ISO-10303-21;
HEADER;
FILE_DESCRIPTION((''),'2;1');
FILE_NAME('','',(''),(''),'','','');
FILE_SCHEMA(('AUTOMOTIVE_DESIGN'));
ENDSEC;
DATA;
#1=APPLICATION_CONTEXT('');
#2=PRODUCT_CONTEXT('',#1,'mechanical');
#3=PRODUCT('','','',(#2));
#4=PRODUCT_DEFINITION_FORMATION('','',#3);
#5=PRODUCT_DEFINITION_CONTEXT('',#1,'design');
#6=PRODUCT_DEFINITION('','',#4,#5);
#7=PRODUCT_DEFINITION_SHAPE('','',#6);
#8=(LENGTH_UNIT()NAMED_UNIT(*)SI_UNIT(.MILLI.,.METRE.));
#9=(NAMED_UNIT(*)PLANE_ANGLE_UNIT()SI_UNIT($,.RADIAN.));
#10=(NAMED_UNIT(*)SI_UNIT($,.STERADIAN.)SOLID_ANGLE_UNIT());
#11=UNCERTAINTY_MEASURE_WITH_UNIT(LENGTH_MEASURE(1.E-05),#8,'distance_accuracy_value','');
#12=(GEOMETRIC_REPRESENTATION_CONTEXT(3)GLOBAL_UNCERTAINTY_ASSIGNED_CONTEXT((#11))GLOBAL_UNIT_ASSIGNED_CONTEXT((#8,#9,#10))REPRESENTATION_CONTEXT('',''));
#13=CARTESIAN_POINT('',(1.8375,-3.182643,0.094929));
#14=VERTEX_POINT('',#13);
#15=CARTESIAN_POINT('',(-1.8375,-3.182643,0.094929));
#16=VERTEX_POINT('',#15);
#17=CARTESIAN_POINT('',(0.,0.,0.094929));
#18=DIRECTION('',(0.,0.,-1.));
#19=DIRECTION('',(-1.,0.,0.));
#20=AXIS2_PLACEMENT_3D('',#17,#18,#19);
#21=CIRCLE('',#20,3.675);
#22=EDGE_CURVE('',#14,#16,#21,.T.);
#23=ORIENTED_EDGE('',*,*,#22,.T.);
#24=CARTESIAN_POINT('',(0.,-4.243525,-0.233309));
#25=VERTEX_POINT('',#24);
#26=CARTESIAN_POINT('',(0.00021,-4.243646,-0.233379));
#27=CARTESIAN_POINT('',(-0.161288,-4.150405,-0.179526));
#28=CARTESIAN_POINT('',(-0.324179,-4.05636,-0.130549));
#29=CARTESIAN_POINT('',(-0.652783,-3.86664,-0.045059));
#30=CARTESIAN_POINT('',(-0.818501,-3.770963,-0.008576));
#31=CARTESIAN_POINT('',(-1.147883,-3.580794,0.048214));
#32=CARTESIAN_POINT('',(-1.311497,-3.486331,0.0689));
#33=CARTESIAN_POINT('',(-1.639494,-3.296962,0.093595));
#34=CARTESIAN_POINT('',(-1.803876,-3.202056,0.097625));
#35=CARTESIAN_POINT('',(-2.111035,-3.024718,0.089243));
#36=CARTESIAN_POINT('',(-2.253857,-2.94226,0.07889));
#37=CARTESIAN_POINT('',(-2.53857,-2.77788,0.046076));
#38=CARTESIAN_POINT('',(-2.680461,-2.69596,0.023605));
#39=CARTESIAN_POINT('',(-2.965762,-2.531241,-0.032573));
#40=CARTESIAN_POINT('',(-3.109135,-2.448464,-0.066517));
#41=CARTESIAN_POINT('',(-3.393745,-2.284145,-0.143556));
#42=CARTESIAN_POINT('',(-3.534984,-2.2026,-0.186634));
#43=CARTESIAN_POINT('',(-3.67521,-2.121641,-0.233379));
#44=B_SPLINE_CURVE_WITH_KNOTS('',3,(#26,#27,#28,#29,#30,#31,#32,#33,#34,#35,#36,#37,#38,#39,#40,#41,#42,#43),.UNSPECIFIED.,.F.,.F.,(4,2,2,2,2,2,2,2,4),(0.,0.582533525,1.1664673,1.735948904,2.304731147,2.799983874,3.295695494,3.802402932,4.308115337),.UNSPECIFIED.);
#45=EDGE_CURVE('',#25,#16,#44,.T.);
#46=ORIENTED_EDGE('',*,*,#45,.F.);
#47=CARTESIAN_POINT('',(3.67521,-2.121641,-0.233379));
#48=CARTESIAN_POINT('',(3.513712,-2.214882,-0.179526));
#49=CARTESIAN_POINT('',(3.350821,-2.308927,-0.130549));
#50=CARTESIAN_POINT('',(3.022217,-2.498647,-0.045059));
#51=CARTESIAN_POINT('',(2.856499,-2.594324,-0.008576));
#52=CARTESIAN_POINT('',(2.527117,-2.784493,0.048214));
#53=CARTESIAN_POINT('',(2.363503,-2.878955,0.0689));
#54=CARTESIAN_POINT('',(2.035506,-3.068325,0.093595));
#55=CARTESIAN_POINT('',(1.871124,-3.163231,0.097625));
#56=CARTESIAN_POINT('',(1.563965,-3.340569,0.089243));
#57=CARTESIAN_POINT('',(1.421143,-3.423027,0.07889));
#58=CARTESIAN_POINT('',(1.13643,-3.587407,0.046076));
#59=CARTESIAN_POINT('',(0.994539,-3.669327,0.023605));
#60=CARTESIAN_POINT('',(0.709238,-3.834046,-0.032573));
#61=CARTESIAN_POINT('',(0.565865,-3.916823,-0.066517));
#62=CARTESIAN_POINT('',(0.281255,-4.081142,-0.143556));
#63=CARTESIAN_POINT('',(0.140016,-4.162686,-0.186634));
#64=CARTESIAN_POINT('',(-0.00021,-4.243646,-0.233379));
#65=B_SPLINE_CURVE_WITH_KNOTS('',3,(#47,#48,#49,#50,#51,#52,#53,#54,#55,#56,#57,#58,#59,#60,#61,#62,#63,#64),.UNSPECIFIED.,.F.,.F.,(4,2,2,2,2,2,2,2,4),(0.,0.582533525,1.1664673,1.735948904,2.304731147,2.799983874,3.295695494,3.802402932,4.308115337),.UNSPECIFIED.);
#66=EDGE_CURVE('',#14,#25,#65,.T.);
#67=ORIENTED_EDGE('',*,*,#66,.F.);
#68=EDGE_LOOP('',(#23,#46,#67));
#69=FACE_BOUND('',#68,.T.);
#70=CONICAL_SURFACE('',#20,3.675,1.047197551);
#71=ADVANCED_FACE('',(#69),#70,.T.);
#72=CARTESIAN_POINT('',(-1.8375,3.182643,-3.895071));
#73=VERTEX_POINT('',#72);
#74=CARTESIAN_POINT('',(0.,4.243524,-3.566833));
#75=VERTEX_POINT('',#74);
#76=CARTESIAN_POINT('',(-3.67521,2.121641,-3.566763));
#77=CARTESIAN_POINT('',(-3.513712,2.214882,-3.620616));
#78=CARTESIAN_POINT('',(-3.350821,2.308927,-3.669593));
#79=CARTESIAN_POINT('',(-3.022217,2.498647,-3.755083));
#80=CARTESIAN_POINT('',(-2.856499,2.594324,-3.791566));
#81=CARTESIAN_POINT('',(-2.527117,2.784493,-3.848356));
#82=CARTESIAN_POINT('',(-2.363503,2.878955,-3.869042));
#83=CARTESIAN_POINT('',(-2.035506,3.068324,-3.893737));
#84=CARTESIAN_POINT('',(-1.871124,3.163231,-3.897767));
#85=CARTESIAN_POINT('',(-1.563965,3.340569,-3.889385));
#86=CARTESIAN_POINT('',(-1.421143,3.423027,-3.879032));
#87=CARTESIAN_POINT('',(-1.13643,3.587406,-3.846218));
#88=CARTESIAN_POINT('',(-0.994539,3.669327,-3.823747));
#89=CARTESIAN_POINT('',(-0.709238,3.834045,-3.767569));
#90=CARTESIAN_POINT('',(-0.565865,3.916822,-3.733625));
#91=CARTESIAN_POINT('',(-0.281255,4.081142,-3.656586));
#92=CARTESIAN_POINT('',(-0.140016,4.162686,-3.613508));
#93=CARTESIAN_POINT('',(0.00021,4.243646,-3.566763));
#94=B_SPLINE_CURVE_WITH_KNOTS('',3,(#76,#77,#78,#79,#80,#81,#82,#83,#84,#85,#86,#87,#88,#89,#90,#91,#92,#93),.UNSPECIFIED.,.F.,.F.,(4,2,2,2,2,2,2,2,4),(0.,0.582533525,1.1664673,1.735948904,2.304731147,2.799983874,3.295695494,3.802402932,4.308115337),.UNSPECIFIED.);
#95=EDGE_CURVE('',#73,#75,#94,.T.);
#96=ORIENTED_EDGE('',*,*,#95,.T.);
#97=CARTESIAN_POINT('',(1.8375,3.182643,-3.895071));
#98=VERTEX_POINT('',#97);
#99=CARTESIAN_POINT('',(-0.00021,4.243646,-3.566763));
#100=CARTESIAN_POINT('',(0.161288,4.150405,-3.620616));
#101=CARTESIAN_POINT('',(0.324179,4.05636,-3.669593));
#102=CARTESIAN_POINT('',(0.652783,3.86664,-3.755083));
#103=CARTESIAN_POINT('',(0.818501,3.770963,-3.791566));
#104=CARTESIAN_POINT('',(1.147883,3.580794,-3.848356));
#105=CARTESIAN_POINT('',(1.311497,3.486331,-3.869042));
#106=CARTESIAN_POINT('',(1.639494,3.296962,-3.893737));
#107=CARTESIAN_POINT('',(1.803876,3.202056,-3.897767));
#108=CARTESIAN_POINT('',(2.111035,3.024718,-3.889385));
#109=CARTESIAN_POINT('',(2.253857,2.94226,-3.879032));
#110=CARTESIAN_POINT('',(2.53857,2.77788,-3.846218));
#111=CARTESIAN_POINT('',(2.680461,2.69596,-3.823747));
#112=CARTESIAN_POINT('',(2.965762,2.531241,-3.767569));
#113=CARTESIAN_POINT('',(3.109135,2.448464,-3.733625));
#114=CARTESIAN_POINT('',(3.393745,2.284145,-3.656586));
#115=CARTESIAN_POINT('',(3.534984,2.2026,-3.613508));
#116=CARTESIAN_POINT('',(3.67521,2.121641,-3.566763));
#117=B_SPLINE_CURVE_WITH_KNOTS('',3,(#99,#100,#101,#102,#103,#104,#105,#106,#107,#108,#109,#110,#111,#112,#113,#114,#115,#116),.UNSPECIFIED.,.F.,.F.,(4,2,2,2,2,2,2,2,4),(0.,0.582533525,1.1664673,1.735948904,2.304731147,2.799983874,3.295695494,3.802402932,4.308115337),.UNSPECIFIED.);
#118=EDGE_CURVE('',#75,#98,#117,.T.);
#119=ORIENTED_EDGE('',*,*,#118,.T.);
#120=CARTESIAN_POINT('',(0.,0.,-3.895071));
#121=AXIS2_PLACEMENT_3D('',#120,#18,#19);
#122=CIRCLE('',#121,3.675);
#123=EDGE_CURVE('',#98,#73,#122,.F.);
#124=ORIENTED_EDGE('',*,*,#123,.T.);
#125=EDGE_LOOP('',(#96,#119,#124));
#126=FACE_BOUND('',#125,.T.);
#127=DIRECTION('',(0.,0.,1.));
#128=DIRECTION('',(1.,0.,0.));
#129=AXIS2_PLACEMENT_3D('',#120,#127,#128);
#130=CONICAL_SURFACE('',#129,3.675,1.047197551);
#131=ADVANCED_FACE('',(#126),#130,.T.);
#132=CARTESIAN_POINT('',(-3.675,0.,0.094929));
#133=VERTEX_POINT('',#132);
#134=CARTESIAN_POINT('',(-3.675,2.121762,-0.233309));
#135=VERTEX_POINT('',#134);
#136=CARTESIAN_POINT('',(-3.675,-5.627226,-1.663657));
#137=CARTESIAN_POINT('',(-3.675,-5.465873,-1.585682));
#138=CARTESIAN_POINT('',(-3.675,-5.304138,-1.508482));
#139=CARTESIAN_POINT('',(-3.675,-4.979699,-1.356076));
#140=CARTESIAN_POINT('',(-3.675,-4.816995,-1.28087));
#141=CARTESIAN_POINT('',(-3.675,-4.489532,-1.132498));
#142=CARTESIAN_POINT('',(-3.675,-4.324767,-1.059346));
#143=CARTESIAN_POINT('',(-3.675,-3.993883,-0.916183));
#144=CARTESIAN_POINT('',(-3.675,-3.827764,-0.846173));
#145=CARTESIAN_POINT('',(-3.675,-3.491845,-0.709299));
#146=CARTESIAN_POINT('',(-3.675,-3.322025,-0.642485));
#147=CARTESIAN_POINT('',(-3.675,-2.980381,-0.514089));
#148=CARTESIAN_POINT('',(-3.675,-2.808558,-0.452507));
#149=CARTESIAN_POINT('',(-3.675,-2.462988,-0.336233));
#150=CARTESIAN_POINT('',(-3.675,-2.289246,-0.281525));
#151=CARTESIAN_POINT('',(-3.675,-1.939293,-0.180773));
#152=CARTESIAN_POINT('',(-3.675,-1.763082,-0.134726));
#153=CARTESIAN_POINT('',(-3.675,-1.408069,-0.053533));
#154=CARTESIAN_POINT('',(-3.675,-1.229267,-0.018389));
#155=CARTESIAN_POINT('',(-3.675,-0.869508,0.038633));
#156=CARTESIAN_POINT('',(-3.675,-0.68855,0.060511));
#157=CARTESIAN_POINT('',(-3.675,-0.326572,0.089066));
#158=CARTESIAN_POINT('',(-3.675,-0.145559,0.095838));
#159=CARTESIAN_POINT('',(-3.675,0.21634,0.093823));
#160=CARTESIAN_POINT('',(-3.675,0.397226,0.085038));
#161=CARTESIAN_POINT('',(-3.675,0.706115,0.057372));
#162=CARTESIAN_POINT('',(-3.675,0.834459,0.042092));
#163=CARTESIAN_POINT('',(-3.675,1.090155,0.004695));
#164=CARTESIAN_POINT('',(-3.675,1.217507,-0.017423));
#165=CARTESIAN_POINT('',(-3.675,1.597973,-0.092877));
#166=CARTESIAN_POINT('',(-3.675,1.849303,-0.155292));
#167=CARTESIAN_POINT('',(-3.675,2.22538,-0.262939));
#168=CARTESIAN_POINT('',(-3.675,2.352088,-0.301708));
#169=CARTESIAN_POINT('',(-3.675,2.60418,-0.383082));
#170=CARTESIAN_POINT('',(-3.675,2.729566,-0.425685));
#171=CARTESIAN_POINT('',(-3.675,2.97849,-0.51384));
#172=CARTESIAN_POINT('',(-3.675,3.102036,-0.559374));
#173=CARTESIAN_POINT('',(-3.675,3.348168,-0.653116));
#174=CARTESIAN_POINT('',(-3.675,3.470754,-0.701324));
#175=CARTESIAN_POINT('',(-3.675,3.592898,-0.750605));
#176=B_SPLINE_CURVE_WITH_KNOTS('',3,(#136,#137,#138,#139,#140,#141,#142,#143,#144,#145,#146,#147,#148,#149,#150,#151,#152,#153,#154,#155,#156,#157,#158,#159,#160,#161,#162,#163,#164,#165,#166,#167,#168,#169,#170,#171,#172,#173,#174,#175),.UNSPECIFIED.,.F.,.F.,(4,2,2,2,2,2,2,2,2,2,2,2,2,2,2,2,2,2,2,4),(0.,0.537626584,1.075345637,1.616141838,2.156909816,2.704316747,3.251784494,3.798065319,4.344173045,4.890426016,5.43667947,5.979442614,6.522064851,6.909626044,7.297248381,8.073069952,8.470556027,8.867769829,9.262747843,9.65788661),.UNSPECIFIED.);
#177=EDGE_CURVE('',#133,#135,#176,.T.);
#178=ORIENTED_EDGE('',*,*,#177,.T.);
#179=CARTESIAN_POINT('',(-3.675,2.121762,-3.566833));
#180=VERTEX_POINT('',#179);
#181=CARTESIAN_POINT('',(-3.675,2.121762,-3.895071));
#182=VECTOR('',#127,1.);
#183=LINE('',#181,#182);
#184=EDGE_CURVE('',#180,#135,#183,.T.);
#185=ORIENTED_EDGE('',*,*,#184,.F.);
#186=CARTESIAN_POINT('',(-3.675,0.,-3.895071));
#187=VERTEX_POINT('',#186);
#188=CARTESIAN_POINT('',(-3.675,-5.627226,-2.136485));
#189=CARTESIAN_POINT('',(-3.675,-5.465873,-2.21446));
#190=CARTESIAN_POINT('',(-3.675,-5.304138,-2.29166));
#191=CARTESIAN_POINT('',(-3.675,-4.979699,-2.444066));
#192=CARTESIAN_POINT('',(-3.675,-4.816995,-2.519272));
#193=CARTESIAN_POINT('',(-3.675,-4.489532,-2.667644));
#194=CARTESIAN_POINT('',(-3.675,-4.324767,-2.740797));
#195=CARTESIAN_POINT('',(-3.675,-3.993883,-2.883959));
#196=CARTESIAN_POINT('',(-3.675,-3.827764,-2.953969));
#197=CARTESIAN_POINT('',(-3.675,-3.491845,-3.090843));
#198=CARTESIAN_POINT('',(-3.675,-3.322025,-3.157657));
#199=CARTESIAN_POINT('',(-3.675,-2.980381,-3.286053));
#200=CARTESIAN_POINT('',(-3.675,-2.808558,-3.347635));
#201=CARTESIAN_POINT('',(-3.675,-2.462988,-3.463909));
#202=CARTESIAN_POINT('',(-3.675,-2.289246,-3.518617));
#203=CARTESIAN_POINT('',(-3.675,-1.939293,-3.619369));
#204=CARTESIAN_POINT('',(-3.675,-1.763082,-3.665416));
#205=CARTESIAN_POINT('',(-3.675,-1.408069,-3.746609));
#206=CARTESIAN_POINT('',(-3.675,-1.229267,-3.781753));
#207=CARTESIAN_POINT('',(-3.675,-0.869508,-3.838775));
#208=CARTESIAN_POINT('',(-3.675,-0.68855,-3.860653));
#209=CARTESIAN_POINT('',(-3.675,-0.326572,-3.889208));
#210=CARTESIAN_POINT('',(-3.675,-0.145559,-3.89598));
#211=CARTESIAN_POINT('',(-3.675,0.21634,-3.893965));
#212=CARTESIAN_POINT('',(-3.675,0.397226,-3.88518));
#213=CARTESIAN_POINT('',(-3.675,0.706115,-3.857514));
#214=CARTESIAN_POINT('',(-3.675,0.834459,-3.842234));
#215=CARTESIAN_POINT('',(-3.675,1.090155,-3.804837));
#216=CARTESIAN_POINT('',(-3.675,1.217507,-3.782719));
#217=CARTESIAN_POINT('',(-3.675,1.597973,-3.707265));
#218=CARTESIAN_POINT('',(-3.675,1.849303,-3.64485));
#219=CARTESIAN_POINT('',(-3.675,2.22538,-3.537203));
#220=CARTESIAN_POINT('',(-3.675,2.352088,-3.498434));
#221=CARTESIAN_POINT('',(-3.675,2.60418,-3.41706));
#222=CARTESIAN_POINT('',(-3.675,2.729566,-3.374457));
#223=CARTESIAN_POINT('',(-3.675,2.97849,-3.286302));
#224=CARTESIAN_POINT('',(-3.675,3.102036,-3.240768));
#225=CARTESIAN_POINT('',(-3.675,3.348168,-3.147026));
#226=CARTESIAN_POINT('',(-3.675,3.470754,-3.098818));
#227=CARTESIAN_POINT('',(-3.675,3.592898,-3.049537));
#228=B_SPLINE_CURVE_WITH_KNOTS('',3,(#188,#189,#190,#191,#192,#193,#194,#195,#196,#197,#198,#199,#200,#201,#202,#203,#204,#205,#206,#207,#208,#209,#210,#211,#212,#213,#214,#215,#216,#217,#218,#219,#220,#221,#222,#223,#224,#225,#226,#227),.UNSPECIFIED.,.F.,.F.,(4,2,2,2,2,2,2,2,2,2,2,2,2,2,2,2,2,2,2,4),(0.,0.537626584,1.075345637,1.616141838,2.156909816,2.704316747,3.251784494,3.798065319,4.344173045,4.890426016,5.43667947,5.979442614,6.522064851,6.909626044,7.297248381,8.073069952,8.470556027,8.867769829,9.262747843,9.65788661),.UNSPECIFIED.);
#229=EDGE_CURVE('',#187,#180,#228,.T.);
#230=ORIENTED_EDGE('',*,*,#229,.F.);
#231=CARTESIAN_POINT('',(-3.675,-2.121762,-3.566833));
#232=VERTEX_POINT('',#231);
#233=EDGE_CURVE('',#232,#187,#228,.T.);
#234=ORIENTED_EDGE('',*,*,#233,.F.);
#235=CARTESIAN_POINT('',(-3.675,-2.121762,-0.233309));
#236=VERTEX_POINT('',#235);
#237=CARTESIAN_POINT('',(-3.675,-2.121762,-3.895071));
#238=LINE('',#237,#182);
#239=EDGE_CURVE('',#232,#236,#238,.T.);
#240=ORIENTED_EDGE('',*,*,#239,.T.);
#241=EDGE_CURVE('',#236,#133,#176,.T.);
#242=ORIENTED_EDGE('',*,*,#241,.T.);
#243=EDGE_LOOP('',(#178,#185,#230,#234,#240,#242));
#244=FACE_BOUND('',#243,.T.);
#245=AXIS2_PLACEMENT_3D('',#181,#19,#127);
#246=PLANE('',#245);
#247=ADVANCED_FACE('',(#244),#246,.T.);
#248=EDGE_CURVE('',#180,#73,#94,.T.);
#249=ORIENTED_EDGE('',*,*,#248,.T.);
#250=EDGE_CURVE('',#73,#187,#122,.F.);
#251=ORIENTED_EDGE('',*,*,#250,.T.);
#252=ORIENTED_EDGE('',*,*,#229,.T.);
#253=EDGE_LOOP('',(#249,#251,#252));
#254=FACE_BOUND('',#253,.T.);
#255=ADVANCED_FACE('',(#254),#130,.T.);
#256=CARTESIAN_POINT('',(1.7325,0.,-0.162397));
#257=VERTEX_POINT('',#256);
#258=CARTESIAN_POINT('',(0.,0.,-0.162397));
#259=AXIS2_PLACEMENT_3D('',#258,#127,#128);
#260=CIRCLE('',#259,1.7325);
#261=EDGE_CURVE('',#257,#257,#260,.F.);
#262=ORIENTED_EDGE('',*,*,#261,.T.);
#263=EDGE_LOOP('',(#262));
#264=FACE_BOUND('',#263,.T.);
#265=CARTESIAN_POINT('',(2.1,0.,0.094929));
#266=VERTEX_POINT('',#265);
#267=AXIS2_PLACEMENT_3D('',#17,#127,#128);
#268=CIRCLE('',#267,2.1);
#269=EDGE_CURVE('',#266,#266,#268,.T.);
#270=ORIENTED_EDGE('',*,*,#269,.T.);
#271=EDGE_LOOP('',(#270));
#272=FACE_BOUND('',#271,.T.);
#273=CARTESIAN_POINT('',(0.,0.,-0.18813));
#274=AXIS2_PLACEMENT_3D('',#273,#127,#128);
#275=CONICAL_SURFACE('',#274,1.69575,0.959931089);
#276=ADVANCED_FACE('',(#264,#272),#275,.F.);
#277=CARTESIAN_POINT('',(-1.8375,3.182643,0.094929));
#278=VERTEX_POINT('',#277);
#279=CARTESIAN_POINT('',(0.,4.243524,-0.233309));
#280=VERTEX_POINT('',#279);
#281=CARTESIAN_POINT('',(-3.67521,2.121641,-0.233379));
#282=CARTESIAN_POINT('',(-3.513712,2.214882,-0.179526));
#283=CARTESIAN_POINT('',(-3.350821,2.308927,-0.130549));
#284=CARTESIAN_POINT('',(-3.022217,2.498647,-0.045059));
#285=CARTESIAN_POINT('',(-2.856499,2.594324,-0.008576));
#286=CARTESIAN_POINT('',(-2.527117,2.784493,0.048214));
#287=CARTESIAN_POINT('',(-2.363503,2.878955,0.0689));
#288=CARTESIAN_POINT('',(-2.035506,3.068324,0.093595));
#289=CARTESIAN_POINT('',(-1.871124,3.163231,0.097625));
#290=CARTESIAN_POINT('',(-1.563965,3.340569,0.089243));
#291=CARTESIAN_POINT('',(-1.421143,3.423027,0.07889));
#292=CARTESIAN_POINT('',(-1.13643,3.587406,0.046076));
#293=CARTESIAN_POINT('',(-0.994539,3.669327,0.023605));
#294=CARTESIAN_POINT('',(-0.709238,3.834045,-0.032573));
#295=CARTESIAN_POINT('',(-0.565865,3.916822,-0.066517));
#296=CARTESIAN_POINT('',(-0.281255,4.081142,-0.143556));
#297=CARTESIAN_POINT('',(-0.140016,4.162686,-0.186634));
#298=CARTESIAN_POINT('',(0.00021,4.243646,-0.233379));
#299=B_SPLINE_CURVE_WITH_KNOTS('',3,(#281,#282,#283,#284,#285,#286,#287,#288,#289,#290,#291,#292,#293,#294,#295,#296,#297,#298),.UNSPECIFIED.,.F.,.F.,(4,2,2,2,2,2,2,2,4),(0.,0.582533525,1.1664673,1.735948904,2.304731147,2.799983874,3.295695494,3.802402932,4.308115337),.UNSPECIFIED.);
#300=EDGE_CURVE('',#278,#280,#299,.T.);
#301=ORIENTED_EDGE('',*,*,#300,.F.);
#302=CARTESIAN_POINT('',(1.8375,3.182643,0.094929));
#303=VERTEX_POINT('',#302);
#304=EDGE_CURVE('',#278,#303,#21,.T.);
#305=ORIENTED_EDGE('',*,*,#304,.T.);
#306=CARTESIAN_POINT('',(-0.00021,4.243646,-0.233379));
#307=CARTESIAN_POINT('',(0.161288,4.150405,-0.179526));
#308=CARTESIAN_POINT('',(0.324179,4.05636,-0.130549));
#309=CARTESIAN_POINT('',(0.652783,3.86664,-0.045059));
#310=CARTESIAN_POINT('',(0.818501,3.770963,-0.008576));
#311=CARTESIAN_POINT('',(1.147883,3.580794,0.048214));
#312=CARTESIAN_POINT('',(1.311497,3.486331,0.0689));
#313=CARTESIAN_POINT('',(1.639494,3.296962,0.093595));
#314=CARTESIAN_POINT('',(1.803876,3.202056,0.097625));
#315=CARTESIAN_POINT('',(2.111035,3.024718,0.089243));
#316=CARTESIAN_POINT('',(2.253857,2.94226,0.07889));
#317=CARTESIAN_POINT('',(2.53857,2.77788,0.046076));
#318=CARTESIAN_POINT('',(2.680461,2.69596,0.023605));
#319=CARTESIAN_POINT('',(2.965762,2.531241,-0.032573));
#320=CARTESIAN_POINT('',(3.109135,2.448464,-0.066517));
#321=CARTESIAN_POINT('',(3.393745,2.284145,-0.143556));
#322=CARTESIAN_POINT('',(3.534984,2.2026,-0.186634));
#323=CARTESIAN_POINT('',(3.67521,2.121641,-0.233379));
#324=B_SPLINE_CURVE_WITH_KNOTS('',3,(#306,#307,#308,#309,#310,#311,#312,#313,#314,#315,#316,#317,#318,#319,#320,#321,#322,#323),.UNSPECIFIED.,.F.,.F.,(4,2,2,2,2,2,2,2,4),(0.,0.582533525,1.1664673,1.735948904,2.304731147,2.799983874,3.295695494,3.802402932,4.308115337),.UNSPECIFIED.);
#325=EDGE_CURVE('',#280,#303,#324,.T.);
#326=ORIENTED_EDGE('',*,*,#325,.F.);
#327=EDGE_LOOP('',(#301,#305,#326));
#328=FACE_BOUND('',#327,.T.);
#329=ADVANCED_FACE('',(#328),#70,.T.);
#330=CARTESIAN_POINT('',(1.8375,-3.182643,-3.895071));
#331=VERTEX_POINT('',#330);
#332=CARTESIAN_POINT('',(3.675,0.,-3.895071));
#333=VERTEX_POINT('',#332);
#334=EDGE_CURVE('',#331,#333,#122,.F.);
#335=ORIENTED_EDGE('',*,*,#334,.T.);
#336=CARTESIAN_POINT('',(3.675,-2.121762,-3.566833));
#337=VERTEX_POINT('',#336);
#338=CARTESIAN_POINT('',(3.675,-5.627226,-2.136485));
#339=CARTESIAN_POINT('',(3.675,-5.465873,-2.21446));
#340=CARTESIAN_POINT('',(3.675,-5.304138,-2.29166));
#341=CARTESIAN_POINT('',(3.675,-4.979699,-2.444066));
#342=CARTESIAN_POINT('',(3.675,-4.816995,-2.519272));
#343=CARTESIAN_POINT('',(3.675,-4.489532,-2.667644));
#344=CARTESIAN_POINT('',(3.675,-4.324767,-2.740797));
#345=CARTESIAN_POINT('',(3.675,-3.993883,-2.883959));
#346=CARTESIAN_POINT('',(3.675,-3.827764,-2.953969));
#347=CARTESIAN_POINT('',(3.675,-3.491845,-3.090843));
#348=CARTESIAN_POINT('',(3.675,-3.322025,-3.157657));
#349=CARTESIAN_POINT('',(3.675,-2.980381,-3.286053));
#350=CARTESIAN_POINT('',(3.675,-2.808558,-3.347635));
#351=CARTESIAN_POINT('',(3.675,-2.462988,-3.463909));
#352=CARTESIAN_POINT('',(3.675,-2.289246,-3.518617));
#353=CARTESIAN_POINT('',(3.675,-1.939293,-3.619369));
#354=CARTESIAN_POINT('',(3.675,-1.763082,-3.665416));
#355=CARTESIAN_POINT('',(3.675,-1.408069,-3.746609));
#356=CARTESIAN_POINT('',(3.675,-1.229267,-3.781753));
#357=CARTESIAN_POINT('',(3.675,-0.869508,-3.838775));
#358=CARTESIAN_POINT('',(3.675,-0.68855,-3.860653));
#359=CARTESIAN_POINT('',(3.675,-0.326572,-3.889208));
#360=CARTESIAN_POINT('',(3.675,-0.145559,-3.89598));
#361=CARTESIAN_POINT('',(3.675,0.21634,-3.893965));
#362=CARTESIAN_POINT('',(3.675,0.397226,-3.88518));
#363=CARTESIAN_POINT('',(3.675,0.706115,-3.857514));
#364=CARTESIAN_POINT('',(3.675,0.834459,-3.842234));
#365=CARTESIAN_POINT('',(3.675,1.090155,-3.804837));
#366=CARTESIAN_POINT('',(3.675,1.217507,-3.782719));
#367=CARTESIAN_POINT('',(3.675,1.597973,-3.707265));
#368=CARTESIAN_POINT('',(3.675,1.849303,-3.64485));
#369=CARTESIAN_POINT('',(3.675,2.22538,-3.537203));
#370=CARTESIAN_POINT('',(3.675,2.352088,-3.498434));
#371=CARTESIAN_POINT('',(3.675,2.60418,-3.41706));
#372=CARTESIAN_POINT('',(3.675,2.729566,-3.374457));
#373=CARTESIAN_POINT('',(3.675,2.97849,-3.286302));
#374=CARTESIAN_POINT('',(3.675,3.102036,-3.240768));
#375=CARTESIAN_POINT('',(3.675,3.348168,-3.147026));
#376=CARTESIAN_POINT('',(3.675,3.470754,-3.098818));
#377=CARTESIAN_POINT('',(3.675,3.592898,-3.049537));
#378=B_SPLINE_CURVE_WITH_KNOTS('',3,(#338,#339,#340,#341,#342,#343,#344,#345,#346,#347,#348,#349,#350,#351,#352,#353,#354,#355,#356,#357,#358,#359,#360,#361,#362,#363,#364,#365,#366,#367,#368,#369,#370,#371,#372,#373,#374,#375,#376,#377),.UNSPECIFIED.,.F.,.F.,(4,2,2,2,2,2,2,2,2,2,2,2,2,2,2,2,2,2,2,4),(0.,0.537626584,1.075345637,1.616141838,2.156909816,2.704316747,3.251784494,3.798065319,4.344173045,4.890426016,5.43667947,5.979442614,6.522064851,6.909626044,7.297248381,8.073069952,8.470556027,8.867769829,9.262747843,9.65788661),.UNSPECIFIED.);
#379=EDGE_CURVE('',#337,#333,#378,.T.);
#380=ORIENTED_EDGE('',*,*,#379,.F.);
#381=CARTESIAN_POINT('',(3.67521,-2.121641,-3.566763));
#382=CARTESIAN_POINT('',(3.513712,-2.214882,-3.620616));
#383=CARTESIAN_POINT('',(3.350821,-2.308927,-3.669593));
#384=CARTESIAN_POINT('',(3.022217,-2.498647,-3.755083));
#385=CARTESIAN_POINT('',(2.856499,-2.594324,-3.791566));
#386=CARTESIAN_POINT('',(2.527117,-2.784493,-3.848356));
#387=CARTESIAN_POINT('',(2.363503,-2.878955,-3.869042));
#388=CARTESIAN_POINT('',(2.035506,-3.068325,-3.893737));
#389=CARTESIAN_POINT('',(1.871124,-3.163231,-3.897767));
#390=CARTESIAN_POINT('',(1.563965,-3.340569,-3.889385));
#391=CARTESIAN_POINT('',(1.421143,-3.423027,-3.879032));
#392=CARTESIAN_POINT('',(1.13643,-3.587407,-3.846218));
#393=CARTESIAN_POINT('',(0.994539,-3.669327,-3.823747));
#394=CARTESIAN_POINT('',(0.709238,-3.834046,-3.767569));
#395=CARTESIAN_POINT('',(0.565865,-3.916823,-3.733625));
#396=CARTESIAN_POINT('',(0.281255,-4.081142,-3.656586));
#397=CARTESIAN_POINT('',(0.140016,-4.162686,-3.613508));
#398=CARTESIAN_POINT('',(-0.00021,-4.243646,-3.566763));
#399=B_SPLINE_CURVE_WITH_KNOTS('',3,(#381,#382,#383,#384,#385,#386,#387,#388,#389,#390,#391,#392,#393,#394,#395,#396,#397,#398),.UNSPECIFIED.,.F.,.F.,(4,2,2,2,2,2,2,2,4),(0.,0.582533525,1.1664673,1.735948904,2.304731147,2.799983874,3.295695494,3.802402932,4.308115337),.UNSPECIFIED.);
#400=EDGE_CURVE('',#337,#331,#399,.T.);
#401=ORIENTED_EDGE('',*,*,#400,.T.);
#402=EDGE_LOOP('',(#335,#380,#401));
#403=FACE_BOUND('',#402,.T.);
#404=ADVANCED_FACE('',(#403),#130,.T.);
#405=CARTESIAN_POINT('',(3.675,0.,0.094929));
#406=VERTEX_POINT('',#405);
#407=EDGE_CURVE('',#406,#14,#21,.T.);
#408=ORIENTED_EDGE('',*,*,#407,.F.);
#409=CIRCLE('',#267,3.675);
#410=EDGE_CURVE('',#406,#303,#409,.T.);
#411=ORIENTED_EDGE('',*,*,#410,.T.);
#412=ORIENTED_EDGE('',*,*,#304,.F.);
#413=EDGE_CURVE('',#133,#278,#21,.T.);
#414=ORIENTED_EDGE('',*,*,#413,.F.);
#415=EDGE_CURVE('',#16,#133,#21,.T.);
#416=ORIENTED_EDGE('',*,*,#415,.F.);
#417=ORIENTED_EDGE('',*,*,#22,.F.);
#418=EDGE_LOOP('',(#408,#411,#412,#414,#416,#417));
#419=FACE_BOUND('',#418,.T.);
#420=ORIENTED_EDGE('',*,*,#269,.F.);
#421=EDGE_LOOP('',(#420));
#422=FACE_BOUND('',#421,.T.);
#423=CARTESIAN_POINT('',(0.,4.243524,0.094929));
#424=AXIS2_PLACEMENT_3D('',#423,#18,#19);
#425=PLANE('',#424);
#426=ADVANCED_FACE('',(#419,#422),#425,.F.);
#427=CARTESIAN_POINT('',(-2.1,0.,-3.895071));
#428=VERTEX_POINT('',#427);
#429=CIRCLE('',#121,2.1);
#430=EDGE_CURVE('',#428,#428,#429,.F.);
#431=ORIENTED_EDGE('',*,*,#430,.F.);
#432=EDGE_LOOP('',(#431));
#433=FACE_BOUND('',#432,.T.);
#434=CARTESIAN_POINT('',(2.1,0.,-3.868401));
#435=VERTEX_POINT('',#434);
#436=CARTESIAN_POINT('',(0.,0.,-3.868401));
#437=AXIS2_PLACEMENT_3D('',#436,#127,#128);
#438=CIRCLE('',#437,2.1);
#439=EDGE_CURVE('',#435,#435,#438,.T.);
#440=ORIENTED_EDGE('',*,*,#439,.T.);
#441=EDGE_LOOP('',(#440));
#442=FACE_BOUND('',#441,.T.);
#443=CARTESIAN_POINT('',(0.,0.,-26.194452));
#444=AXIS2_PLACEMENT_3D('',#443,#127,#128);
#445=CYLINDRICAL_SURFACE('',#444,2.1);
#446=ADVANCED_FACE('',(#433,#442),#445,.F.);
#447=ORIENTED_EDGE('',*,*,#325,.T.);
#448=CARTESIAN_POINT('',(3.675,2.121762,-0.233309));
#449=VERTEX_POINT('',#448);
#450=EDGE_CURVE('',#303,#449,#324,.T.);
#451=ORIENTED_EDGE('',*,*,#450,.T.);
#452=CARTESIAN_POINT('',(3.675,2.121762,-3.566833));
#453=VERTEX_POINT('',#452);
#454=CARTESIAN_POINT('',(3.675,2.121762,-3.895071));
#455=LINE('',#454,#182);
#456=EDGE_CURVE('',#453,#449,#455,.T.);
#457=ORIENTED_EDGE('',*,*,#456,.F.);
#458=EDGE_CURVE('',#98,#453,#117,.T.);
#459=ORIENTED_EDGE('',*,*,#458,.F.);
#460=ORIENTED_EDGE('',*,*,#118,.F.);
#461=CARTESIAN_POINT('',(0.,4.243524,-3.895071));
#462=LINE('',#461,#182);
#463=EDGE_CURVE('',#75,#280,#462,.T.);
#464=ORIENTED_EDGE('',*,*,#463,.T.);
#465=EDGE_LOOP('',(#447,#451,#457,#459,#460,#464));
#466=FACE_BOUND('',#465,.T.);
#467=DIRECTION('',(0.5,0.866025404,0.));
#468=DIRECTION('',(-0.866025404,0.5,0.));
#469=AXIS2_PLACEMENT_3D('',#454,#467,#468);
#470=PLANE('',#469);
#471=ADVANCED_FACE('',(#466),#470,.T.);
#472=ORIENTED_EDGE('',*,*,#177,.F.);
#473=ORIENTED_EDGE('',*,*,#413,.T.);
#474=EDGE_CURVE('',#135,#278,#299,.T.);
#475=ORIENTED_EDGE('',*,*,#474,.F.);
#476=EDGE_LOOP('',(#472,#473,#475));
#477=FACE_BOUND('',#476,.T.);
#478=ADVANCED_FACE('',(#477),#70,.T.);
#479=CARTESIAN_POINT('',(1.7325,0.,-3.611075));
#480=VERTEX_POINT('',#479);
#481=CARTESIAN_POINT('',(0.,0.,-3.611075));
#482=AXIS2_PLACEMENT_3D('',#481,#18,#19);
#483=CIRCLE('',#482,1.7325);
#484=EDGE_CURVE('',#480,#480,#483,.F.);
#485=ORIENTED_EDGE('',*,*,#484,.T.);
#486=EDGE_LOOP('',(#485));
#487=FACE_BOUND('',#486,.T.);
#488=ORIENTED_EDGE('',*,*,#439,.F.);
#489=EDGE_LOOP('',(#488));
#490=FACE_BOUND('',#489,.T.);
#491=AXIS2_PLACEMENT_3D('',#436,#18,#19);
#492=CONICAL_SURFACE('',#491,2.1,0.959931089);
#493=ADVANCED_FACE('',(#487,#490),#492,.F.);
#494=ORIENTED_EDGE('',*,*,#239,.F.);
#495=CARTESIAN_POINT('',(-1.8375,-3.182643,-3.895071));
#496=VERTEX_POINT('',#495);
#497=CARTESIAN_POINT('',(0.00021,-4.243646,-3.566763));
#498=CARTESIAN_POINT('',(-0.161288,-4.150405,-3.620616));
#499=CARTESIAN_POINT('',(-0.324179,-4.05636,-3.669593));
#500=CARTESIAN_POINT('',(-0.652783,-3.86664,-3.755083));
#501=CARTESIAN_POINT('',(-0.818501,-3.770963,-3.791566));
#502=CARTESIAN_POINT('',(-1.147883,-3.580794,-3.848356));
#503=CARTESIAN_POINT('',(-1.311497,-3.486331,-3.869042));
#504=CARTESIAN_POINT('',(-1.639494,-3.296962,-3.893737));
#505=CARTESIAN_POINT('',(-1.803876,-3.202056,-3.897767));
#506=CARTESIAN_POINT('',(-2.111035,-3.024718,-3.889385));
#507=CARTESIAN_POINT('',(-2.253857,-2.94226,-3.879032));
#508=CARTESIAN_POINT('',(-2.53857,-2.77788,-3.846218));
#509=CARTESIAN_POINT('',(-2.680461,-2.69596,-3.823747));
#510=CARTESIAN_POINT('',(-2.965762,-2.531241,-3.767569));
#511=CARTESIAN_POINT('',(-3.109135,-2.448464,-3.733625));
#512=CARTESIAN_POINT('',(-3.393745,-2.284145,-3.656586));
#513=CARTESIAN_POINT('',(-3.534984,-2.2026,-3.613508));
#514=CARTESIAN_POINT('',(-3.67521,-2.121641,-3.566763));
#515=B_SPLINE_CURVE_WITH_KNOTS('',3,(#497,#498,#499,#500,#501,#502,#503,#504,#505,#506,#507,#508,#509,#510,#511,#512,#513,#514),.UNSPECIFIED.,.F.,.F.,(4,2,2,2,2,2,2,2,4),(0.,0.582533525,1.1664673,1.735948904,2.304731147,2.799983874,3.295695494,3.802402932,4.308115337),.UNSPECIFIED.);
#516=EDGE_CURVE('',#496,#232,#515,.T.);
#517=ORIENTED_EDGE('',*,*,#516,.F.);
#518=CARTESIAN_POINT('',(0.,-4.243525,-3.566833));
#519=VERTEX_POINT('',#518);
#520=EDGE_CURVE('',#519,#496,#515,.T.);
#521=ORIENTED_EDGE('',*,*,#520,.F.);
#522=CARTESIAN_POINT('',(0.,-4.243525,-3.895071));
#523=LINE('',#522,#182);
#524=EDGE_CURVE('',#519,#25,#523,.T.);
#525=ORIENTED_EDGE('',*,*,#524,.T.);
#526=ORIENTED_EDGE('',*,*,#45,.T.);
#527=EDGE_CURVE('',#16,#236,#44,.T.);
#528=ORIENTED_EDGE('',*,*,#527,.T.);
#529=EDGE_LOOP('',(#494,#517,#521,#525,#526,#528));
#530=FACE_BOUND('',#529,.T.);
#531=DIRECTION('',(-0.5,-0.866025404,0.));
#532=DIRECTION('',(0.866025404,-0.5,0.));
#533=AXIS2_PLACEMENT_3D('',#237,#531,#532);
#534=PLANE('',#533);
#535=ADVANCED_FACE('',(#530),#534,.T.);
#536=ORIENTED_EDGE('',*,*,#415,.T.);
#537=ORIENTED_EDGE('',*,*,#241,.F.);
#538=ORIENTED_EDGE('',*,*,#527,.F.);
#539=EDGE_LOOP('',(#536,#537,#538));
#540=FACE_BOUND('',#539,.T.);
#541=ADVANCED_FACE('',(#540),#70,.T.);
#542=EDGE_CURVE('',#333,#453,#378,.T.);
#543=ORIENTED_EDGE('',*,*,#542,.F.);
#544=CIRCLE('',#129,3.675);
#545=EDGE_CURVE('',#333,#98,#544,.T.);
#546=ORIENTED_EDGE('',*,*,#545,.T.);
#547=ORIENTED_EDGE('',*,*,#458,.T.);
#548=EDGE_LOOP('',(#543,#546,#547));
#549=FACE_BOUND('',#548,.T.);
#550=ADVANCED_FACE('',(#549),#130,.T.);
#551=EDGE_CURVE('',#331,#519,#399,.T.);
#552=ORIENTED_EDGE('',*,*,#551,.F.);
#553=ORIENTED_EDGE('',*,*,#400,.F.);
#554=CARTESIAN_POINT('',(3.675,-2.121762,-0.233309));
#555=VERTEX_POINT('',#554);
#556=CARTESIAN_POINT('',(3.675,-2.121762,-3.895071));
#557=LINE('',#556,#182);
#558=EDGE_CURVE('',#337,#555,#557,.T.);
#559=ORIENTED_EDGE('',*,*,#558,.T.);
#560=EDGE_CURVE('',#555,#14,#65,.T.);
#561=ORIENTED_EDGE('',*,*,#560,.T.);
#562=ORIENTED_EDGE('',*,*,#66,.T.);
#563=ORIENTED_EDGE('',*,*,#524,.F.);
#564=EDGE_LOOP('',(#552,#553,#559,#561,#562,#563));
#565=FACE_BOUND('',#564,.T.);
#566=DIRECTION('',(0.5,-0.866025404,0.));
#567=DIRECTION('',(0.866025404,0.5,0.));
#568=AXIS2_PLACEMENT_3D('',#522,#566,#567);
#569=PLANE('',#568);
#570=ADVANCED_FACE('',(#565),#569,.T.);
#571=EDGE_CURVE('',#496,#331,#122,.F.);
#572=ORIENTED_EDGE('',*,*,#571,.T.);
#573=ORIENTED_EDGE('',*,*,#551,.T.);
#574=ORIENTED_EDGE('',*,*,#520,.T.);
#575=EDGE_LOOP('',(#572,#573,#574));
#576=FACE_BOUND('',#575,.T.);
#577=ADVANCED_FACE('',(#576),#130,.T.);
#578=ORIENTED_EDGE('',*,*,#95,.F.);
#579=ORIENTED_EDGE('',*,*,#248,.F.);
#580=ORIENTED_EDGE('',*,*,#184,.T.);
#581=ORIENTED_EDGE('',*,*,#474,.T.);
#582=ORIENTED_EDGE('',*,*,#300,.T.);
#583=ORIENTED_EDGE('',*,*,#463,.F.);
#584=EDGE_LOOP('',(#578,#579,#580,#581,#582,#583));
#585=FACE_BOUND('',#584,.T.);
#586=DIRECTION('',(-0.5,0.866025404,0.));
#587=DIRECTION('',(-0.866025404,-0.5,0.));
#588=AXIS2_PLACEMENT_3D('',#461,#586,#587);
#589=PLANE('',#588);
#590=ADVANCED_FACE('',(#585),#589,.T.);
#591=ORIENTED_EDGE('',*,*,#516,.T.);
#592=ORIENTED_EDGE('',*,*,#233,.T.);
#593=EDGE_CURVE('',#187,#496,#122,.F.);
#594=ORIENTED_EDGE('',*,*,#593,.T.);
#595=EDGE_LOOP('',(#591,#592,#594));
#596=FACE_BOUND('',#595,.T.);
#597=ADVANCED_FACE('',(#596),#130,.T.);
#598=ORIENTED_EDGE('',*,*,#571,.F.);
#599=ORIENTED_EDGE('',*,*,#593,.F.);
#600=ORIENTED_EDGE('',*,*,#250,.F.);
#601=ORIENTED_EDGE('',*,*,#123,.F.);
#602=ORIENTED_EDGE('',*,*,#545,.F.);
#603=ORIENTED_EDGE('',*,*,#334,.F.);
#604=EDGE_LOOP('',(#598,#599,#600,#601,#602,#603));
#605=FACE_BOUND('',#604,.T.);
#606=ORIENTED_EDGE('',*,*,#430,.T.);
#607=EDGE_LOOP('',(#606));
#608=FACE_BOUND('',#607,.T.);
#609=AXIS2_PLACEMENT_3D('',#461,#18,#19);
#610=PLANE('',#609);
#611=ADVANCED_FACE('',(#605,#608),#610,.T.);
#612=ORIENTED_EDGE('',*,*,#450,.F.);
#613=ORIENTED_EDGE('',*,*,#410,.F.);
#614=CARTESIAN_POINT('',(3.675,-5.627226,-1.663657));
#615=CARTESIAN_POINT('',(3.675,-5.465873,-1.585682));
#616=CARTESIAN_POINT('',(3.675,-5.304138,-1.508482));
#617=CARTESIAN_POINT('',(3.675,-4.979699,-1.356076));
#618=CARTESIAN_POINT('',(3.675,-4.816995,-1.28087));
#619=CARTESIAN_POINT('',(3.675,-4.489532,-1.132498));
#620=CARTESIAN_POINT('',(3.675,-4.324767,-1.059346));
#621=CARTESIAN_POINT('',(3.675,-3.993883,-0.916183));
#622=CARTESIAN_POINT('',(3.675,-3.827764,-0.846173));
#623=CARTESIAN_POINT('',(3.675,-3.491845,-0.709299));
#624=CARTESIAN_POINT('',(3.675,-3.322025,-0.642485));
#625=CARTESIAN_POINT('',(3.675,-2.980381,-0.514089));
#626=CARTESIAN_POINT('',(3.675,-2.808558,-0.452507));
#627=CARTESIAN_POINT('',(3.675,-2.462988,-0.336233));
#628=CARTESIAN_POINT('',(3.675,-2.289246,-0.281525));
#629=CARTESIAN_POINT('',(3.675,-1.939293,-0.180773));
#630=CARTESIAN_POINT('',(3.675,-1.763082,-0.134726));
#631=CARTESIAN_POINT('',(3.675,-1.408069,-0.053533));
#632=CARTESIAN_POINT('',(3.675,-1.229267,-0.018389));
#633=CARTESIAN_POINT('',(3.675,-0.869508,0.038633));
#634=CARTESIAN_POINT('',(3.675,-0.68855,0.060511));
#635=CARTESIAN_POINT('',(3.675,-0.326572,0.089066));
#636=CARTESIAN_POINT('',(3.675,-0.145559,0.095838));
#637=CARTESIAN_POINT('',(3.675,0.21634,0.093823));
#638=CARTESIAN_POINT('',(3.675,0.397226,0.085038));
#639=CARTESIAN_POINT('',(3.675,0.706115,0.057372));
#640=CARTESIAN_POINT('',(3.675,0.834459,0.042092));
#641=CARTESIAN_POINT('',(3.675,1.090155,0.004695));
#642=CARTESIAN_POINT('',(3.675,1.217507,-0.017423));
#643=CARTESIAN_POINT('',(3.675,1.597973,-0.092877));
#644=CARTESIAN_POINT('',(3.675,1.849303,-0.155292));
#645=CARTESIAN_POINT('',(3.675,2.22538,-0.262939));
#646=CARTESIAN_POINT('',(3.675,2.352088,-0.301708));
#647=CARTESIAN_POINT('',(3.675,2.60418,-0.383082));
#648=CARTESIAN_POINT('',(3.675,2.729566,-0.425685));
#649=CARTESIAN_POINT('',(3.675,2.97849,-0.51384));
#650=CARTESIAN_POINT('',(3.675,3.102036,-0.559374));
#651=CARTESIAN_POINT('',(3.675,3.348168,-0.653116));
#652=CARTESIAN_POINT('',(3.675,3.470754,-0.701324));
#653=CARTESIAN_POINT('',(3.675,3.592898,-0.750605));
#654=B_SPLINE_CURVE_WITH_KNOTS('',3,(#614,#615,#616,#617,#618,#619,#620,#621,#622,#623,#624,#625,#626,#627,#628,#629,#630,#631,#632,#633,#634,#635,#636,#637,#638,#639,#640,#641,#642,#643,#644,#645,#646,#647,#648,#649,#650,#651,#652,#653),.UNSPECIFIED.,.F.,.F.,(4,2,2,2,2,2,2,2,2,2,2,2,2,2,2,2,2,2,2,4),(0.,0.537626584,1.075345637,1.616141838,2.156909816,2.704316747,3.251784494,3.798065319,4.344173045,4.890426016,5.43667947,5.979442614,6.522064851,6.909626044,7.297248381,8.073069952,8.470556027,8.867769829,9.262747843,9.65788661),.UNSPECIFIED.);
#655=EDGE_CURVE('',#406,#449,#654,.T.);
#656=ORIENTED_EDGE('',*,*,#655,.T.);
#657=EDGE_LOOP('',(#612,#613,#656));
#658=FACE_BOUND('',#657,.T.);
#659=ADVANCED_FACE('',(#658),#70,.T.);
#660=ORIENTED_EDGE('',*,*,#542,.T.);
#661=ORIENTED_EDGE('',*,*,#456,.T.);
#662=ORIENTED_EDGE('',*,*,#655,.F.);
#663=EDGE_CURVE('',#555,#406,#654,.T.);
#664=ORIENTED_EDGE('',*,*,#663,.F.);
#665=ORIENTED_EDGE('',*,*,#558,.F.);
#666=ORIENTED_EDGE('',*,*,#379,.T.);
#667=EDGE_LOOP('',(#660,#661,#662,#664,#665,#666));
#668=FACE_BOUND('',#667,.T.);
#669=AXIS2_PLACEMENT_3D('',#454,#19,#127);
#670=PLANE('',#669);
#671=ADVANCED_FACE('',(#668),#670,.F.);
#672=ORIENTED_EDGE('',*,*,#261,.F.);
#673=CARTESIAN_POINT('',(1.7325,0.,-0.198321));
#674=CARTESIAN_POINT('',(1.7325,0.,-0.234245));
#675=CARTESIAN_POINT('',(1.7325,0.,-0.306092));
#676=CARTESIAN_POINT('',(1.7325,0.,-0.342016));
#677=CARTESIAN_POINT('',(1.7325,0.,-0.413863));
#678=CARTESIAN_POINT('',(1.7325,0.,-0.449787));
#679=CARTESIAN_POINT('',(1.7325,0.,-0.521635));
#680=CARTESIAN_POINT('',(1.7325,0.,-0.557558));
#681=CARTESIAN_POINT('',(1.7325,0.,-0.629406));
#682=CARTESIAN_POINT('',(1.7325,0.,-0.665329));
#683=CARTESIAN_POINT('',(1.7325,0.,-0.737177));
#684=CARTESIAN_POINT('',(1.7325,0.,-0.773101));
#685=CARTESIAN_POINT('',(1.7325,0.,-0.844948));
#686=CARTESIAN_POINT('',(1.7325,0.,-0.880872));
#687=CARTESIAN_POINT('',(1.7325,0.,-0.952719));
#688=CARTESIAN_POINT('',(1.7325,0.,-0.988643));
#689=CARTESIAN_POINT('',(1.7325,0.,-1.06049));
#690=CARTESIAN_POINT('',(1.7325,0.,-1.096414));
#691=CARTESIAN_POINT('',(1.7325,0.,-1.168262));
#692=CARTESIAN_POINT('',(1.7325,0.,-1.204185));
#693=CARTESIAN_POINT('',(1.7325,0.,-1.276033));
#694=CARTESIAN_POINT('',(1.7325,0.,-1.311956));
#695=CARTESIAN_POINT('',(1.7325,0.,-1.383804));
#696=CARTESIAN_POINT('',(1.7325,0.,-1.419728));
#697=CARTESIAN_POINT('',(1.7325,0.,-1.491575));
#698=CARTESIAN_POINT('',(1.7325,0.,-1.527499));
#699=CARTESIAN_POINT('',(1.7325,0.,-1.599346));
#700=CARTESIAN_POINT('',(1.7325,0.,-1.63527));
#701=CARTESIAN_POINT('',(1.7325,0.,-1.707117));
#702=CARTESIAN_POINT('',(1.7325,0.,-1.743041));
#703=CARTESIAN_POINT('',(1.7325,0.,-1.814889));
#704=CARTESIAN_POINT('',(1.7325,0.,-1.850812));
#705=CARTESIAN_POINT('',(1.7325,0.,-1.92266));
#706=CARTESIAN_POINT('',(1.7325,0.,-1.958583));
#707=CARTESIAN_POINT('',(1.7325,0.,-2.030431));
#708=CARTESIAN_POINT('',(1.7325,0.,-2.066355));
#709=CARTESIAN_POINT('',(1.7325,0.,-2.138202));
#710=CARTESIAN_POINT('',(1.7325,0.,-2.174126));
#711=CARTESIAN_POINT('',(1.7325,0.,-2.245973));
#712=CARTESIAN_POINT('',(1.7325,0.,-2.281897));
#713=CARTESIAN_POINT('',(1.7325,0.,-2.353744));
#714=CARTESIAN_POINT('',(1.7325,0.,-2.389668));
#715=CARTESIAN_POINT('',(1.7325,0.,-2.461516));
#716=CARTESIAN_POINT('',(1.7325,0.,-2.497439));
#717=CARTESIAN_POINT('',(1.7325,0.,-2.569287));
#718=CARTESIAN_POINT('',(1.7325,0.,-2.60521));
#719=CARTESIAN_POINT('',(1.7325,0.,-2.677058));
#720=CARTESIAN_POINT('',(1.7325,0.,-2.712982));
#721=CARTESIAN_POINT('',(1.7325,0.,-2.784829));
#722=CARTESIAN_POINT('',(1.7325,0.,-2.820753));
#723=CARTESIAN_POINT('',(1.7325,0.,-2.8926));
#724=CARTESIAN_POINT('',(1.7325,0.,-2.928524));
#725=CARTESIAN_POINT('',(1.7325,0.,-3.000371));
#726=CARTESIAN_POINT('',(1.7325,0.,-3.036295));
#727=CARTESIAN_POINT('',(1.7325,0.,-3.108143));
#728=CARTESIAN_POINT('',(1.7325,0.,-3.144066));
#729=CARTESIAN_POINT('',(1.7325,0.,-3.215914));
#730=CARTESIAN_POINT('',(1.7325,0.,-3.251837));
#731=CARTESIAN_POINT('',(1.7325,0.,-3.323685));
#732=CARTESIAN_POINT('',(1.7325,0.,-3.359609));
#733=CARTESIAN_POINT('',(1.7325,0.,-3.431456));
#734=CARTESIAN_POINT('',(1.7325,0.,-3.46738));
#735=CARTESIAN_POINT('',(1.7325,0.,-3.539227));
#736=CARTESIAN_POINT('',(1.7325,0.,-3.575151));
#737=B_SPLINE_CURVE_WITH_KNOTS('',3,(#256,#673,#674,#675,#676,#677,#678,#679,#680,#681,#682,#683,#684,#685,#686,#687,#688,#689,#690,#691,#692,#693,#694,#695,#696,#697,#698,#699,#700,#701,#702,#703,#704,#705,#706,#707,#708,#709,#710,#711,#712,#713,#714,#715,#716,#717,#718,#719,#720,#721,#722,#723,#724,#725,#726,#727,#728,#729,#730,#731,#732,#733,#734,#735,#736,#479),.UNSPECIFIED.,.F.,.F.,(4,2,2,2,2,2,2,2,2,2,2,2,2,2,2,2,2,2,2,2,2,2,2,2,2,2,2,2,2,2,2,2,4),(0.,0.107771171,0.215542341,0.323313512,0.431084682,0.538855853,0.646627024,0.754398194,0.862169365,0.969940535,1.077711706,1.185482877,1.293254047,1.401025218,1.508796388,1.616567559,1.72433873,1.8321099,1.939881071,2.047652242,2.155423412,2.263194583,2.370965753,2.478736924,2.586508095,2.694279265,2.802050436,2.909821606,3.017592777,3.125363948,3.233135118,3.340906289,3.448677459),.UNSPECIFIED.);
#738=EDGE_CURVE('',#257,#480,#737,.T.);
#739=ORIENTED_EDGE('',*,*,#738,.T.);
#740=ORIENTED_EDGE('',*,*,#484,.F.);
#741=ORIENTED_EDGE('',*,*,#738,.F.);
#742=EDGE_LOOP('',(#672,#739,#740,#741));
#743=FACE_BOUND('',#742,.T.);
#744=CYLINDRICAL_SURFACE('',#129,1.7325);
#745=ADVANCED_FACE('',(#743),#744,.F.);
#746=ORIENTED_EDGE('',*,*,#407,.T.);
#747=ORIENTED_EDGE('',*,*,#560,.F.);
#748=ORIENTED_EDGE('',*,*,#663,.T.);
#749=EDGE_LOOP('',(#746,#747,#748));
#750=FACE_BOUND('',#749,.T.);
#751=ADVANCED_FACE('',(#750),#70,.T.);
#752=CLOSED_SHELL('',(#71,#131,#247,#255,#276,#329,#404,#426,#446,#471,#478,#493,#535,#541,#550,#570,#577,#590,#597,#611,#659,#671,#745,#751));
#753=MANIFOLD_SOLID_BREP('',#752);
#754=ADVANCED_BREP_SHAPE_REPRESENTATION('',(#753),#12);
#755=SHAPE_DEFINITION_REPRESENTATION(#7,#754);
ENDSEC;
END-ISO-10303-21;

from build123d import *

# Parameters (mm, degrees)
BASENUT_START = -3.8
BASENUTSKE_R  = 1.65
BASENUT_DEPTH = 3.8
SCALA1_SCALE  = 1.05


# Read off the part's stored shape, not the designer's step: ThreadSchematic
with BuildPart() as part:
    # BaseNutSke → BaseNut (new body)
    with BuildSketch(Plane.XY.offset(BASENUT_START)):
        Polygon((3.5, 2.020725942), (3.5, -2.020725942), (0, -4.041451884), (-3.5, -2.020725942), (-3.5, 2.020725942), (0, 4.041451884), align=None)
        Circle(BASENUTSKE_R, mode=Mode.SUBTRACT)
    extrude(amount=BASENUT_DEPTH)

    # Sketch5 (on Front Plane) → EndChamfer (revolve, cut)
    with BuildSketch(Plane.XY):
        Polygon((3.7746, 2), (3.505020098, 1.615), (3.8254, 1.615), (3.8254, 2), align=None)
    revolve(axis=Axis((3.7746, 2, 0), (-0.5735764363510472, -0.8191520442889912, 0)), mode=Mode.SUBTRACT)

    # Sketch3 → Double-Chamfer (revolve, cut)
    with BuildSketch(Plane(origin=(0, 0, 0), x_dir=(0, 0, -1), z_dir=(1, 0, 0))):
        Polygon((3.8, 3.5), (3.487392609, 4.041451884), (3.487392609, 14.041451884), (13.8, 14.041451884), (13.8, 3.5), align=None)
        Polygon((0.312607391, 14.041451884), (-10, 14.041451884), (-10, 3.5), (0, 3.5), (0.312607391, 4.041451884), align=None)
    revolve(axis=Axis((0, 0, 0), (0, 0, -1)), mode=Mode.SUBTRACT)

    # ThreadSchematic outline → ThreadSchematic (revolve, cut)
    with BuildSketch(Plane.XZ):
        Polygon((1.65, 0), (1.65, -0.245072638), (2, 0), align=None)
        Polygon((2, -3.7746), (1.65, -3.529527362), (1.65, -3.8), (2, -3.8), align=None)
    revolve(axis=Axis((0, 0, 0), (0, 0, 1)), mode=Mode.SUBTRACT)


with BuildPart() as part_1:
    # Scala1: scaled about (0, 0, -1.898579805)
    add(part.part.scale(SCALA1_SCALE).moved(Location((0, 0, 0.09492899))))


solid = part_1.part
